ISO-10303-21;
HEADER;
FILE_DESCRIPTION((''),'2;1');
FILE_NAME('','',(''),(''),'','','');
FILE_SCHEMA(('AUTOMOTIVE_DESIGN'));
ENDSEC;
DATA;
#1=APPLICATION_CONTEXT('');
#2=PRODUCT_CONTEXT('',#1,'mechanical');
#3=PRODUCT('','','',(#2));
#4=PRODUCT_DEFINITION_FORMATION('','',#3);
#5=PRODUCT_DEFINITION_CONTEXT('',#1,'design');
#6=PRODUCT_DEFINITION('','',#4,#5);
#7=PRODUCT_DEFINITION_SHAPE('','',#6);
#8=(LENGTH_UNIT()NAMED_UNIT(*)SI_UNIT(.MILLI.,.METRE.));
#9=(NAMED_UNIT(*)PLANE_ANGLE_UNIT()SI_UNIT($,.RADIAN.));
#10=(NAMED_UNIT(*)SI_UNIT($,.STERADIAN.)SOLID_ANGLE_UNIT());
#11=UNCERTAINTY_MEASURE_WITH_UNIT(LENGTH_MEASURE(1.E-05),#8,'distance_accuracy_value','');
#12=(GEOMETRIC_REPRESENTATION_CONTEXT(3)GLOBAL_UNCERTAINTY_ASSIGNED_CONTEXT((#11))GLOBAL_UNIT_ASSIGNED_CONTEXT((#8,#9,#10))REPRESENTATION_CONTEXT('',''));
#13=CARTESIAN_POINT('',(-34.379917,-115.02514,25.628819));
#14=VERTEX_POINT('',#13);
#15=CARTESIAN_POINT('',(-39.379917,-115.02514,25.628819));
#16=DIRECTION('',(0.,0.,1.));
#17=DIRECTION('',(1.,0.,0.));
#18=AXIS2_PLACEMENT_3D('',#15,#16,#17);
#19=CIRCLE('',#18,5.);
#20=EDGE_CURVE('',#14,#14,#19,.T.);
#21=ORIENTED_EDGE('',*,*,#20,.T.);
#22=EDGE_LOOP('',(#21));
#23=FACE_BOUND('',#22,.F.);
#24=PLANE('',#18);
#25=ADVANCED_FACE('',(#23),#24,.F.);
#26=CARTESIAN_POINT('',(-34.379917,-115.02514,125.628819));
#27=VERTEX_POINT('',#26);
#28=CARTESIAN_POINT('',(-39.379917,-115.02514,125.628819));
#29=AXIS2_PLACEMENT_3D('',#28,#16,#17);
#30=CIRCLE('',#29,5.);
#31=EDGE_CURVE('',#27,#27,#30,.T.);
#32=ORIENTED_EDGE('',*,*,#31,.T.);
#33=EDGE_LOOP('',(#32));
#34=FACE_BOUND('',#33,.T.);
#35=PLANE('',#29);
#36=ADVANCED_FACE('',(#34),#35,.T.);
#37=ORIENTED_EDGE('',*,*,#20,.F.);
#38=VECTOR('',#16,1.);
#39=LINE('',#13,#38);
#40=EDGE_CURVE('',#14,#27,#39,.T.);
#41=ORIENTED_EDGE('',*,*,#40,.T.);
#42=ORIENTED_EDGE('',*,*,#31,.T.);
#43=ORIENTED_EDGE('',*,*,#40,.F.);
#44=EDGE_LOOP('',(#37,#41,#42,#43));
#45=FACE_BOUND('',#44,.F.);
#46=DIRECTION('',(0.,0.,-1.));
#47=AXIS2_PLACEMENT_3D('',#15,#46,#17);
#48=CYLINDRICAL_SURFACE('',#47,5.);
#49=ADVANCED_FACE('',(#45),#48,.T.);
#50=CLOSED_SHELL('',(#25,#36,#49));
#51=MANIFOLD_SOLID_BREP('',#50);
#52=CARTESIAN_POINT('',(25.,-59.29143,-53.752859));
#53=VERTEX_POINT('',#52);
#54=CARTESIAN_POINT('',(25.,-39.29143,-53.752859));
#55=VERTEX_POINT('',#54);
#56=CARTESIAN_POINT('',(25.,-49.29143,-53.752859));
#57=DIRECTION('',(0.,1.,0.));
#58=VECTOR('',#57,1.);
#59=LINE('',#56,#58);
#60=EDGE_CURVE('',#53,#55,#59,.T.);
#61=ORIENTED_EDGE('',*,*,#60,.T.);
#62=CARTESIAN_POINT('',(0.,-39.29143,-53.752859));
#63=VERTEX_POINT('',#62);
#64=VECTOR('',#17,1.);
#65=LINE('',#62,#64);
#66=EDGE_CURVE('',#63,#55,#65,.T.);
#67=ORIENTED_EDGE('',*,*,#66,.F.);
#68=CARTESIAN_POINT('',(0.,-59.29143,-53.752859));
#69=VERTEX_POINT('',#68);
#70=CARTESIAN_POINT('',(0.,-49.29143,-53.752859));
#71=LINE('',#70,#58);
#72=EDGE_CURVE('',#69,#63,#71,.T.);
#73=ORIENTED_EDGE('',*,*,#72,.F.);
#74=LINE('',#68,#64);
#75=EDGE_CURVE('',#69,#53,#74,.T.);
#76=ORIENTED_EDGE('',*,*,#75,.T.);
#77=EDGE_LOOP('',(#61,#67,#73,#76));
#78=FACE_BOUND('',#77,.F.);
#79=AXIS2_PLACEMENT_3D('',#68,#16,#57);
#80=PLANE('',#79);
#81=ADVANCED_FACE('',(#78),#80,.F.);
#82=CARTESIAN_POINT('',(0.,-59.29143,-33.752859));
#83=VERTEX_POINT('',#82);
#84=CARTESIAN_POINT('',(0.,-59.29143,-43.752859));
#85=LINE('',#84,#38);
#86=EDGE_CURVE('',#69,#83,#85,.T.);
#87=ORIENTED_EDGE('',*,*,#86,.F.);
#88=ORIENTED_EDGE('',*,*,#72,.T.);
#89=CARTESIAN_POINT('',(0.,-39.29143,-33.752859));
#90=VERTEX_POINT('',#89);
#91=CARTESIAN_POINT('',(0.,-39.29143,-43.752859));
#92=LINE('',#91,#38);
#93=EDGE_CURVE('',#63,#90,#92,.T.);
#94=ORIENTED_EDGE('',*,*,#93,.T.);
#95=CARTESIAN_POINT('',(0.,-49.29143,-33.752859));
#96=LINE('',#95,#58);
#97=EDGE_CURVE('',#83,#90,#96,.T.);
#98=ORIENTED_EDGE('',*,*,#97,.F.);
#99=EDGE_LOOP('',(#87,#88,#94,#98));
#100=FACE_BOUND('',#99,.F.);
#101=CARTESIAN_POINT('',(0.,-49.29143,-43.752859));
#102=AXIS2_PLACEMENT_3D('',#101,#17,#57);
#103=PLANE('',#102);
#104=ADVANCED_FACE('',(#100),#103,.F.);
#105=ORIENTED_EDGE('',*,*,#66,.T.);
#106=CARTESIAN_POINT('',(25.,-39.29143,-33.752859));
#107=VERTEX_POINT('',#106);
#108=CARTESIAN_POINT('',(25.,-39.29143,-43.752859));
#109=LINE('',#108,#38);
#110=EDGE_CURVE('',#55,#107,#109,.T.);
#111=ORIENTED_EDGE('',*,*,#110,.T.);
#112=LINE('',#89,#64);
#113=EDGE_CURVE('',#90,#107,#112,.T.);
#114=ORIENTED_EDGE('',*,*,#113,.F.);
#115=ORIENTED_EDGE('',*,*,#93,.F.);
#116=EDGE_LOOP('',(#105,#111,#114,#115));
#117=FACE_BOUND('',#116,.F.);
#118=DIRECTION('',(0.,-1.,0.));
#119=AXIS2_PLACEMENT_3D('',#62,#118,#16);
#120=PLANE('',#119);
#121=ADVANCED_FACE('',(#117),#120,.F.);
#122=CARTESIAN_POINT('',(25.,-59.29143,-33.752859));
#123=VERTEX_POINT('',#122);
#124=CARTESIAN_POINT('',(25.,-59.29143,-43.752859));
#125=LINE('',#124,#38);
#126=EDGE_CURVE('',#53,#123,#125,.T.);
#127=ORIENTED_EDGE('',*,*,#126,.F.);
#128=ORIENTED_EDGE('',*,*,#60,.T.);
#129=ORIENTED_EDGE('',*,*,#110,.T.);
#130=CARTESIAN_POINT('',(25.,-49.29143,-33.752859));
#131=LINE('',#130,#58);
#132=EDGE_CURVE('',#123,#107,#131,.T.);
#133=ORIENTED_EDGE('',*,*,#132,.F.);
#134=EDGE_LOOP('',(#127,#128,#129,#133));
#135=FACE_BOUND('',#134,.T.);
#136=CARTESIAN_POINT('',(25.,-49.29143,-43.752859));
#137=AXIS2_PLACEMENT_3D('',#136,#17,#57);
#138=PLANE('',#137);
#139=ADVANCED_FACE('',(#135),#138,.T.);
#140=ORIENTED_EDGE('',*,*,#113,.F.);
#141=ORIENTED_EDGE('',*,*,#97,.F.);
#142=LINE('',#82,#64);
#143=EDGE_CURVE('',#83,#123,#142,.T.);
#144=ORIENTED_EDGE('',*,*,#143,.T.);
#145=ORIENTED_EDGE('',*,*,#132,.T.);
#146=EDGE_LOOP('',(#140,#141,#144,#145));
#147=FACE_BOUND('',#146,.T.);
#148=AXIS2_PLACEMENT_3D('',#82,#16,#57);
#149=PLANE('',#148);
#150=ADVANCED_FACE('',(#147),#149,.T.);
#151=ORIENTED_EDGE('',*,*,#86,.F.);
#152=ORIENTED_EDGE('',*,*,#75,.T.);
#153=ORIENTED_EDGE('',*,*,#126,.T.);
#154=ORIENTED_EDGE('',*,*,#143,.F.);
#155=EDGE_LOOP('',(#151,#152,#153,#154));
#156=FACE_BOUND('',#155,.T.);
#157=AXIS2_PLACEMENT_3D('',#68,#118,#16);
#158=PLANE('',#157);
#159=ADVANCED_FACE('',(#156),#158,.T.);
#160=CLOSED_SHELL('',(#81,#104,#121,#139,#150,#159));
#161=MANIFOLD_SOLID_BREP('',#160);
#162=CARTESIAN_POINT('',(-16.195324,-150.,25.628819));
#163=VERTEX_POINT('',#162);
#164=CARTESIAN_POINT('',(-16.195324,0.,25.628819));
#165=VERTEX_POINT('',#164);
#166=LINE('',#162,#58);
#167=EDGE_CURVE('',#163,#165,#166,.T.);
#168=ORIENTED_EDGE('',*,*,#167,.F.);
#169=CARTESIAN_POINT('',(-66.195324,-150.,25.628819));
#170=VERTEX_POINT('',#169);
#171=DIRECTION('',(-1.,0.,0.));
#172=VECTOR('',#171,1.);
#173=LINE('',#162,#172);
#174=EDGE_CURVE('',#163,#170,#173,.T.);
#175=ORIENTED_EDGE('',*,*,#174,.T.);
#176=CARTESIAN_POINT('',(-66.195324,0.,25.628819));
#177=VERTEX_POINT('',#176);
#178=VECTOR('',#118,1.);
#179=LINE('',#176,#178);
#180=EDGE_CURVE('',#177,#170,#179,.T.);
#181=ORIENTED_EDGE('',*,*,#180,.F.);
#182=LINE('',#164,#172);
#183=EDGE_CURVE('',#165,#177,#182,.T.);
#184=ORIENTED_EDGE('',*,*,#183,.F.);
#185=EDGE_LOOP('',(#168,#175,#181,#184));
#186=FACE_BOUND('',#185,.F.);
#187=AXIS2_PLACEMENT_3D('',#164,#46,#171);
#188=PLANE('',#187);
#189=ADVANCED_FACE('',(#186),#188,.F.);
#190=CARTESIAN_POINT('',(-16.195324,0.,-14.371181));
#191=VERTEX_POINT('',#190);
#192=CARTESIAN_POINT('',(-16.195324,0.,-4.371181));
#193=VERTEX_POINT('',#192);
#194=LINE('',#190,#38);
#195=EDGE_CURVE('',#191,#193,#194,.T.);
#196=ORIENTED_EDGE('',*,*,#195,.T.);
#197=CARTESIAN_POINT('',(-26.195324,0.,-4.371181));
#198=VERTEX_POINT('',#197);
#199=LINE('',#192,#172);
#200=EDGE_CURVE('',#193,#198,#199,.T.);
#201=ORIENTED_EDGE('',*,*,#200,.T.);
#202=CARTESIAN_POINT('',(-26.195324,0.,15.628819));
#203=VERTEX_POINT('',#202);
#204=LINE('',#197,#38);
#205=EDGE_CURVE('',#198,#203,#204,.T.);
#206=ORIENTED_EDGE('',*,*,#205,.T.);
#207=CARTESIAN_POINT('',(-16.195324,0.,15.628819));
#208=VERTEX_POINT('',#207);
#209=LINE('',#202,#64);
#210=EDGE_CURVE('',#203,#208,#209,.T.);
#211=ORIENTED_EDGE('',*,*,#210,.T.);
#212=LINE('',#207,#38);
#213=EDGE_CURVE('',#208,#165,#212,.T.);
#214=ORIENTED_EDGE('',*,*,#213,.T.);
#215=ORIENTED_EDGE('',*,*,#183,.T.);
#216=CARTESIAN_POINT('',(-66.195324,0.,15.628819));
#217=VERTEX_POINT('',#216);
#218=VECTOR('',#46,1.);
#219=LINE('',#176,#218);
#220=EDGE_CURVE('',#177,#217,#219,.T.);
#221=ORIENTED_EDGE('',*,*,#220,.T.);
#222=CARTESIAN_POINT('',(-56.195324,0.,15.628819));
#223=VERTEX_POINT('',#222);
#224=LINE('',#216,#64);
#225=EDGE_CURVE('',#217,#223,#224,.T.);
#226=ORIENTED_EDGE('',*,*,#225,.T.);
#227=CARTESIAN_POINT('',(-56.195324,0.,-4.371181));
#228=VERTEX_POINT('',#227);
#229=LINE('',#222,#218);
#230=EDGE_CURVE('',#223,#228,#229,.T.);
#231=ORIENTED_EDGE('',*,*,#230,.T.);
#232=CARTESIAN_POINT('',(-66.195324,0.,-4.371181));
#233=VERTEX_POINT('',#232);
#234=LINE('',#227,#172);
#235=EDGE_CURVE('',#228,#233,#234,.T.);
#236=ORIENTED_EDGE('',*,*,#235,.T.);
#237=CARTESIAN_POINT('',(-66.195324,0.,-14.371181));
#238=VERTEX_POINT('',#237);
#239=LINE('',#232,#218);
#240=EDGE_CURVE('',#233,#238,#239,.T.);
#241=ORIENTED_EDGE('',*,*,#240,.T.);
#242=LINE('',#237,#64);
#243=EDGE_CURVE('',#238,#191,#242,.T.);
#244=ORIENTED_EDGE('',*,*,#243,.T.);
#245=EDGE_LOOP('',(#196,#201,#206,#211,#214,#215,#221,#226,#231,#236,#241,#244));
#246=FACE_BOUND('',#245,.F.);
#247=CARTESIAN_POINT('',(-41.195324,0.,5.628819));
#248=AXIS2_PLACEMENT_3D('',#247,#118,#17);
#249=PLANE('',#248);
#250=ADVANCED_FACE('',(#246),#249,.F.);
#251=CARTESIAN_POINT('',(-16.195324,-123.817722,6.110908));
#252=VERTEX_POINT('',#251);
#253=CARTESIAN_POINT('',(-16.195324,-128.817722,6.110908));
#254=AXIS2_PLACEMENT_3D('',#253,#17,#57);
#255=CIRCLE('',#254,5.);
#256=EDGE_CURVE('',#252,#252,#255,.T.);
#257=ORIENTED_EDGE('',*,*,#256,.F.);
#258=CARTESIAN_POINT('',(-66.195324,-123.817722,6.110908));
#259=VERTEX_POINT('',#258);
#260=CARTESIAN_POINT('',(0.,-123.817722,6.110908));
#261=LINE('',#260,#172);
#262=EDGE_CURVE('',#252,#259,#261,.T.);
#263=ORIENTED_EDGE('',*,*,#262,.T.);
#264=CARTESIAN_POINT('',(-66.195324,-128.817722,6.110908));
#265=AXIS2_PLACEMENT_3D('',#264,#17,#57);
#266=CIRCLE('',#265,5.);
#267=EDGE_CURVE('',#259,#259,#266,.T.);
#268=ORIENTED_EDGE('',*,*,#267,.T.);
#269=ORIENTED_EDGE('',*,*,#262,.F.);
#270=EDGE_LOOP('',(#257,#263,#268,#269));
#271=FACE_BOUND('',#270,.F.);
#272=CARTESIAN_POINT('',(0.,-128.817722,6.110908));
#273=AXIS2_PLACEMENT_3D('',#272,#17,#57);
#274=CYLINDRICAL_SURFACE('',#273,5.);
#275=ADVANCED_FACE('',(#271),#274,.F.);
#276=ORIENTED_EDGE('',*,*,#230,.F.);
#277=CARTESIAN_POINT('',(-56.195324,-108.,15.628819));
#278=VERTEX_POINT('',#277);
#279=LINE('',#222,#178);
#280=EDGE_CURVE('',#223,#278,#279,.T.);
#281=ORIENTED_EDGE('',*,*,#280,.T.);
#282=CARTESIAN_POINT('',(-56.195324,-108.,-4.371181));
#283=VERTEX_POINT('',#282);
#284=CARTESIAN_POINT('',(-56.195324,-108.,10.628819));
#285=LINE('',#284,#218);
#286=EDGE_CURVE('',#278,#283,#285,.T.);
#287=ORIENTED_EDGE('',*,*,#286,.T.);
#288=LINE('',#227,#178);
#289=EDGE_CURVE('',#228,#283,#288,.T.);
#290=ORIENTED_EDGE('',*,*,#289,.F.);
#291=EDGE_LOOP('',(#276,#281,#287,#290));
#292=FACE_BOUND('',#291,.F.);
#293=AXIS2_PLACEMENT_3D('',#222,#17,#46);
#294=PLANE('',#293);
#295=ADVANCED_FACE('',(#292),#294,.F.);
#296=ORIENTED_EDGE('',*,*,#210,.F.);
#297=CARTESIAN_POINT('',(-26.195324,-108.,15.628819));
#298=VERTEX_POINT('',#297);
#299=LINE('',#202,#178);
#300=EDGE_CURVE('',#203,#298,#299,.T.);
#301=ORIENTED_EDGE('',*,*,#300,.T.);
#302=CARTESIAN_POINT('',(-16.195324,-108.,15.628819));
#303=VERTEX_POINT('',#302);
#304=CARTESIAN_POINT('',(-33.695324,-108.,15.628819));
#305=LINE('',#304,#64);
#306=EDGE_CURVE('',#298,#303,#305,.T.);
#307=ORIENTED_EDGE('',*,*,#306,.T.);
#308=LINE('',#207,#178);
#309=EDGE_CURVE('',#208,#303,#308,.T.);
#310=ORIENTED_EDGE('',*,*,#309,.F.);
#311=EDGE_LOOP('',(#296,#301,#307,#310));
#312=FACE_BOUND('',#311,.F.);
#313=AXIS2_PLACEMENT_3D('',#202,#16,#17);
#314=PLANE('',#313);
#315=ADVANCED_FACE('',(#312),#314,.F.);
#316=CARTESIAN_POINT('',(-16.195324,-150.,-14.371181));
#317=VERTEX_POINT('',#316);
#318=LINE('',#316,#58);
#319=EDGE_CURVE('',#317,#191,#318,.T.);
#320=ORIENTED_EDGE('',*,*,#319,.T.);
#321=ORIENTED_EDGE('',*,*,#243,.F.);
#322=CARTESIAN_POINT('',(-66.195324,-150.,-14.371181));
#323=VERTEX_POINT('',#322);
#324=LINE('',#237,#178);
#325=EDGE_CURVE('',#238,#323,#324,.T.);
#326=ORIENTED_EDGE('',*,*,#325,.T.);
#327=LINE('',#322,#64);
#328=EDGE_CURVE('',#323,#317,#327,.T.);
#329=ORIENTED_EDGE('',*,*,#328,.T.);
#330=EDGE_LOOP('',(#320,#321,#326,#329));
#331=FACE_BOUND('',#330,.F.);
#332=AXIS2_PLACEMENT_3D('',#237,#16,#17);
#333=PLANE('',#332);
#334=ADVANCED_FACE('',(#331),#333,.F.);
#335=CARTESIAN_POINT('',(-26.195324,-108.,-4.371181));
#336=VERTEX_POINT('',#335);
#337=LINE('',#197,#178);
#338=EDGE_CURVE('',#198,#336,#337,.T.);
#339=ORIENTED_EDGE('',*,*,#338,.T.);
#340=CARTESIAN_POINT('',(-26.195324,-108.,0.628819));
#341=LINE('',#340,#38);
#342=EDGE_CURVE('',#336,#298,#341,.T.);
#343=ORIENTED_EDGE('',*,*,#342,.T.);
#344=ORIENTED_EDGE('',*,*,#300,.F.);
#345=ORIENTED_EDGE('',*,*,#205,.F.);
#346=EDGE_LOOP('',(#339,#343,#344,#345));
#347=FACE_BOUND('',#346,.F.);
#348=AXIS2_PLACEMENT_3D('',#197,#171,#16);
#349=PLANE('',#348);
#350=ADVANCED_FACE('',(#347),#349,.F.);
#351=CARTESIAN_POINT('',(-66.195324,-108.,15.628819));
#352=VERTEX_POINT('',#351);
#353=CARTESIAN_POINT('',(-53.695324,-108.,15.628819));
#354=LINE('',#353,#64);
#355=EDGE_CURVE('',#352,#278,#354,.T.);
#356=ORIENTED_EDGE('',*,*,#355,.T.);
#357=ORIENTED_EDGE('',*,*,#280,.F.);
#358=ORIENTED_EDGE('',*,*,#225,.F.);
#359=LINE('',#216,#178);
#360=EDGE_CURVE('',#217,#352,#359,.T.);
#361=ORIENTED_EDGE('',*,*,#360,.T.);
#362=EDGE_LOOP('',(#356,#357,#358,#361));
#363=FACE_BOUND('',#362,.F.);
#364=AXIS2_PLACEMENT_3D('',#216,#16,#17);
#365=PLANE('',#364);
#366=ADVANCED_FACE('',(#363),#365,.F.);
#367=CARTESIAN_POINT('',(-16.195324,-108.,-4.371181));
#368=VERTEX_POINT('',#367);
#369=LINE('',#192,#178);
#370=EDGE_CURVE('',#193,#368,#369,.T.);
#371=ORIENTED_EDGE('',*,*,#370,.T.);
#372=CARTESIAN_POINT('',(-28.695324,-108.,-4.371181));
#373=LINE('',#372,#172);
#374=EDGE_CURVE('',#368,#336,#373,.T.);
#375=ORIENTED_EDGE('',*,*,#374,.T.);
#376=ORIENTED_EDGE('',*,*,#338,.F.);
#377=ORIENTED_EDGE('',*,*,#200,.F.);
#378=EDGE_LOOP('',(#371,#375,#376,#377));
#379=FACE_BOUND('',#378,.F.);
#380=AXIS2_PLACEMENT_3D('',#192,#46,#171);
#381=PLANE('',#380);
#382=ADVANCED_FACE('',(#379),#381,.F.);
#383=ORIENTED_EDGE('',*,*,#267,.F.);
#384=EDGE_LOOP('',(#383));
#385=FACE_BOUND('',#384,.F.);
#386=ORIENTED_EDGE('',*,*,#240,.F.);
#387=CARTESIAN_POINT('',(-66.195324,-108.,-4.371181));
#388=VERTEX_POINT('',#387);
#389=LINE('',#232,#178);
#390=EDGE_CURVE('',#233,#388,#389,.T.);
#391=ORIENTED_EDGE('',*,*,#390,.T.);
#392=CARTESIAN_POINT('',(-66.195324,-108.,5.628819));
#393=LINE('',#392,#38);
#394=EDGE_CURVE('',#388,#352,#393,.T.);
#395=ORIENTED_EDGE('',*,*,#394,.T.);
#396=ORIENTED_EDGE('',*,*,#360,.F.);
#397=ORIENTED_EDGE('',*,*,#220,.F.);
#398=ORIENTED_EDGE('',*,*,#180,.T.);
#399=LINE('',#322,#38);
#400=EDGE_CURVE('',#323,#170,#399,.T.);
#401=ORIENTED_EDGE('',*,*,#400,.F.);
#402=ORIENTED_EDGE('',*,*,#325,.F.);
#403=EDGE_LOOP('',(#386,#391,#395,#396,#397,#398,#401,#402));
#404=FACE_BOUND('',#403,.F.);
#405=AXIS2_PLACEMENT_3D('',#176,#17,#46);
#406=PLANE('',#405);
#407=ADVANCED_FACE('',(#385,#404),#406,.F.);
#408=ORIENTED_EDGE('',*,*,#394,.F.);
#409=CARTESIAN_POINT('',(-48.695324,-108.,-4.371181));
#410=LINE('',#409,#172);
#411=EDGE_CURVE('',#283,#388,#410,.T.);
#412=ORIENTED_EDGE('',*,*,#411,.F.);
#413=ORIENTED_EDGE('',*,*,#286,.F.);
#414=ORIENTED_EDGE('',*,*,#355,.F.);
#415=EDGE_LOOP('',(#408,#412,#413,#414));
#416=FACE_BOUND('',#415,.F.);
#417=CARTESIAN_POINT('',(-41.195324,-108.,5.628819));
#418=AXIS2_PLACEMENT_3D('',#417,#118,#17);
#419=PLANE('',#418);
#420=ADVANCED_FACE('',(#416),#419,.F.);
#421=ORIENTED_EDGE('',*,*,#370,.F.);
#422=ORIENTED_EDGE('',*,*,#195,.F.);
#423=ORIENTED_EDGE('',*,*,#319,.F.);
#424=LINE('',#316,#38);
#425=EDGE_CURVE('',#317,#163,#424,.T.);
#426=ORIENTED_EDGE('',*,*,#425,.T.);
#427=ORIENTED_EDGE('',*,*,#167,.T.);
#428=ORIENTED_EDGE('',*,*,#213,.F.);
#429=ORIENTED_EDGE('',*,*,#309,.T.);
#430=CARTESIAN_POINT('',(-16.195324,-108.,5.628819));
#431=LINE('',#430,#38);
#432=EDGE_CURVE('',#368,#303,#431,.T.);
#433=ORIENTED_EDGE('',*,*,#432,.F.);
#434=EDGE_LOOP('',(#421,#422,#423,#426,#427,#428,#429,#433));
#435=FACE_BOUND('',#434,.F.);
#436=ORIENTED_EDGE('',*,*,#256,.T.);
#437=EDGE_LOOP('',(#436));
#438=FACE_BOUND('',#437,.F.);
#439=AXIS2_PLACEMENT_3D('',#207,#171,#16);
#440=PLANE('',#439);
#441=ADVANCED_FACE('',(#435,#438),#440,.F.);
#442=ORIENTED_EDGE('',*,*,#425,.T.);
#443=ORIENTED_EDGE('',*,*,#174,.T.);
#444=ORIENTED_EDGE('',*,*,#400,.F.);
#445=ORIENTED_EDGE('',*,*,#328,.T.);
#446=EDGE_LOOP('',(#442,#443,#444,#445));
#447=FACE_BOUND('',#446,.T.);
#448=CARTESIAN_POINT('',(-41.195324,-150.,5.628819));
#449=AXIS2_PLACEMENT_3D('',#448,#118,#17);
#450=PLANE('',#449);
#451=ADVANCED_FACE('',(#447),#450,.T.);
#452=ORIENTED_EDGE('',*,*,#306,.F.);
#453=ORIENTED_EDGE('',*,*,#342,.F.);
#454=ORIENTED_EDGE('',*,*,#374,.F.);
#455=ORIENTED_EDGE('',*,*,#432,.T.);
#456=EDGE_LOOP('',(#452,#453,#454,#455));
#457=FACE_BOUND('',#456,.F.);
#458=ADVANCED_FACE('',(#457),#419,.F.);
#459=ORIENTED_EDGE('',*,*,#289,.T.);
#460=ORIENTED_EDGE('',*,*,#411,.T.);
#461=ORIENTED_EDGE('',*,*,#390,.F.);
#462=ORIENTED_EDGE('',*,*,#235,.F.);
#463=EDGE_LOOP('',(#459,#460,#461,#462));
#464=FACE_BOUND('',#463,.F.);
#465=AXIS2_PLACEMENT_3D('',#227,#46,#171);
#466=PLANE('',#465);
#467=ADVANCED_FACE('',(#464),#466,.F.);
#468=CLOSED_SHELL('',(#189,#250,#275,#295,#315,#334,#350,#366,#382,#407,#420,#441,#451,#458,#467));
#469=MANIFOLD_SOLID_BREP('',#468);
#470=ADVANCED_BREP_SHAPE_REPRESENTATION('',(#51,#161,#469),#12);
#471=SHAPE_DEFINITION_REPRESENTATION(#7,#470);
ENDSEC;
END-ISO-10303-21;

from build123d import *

# Parameters (mm, degrees)
F1_DEPTH  = 150
F2_W      = 20
F2_H      = 20
F3_DEPTH  = 25
F4_R      = 5
F5_DEPTH  = 15.2
F6_W      = 50
F6_H      = 40
F7_DEPTH  = 42
F8_R      = 5
F9_DEPTH  = 74.4
F10_R     = 5
F11_DEPTH = 100


# Not quite as in the source:
# - the program builds the solid bodies; features that only make, move or delete a surface that nothing else refers to are left out


with BuildPart() as f1:
    # F0 (on Front) → F1 (new body)
    with BuildSketch(Plane.XZ):
        Polygon((-16.1953240633, 25.6288190931), (-66.1953240633, 25.6288190931), (-66.1953240633, 15.6288190931), (-56.1953240633, 15.6288190931), (-56.1953240633, -4.3711809069), (-66.1953240633, -4.3711809069), (-66.1953240633, -14.3711809069), (-16.1953240633, -14.3711809069), (-16.1953240633, -4.3711809069), (-26.1953240633, -4.3711809069), (-26.1953240633, 15.6288190931), (-16.1953240633, 15.6288190931), align=None)
    extrude(amount=F1_DEPTH)

    # F6 (on face) → F7 (join)
    with BuildSketch(Plane.XZ.offset(150)):
        with Locations((-41.1953240633, 5.6288190931)):
            Rectangle(F6_W, F6_H)
    extrude(amount=-F7_DEPTH)

    # F8 (on Right) → F9 (cut)
    with BuildSketch(Plane.YZ):
        with Locations((-128.8177222013, 6.1109075323)):
            Circle(F8_R)
    extrude(amount=-F9_DEPTH, mode=Mode.SUBTRACT)


with BuildPart() as f3:
    # F2 (on Right) → F3 (new body)
    with BuildSketch(Plane.YZ):
        with Locations((-49.2914298177, -43.7528586388)):
            Rectangle(F2_W, F2_H)
    extrude(amount=F3_DEPTH)

    # F4 (on Right) → F5 (join)
    with BuildSketch(Plane.YZ):
        with Locations((-49.3974834681, -43.340831995)):
            Circle(F4_R)
    extrude(amount=F5_DEPTH)


with BuildPart() as f11:
    # F10 (on face) → F11 (new body)
    with BuildSketch(Plane.XY.offset(25.6288190931)):
        with Locations((-39.3799170852, -115.0251403451)):
            Circle(F10_R)
    extrude(amount=F11_DEPTH)


solid = Compound([f1.part, f3.part, f11.part])
